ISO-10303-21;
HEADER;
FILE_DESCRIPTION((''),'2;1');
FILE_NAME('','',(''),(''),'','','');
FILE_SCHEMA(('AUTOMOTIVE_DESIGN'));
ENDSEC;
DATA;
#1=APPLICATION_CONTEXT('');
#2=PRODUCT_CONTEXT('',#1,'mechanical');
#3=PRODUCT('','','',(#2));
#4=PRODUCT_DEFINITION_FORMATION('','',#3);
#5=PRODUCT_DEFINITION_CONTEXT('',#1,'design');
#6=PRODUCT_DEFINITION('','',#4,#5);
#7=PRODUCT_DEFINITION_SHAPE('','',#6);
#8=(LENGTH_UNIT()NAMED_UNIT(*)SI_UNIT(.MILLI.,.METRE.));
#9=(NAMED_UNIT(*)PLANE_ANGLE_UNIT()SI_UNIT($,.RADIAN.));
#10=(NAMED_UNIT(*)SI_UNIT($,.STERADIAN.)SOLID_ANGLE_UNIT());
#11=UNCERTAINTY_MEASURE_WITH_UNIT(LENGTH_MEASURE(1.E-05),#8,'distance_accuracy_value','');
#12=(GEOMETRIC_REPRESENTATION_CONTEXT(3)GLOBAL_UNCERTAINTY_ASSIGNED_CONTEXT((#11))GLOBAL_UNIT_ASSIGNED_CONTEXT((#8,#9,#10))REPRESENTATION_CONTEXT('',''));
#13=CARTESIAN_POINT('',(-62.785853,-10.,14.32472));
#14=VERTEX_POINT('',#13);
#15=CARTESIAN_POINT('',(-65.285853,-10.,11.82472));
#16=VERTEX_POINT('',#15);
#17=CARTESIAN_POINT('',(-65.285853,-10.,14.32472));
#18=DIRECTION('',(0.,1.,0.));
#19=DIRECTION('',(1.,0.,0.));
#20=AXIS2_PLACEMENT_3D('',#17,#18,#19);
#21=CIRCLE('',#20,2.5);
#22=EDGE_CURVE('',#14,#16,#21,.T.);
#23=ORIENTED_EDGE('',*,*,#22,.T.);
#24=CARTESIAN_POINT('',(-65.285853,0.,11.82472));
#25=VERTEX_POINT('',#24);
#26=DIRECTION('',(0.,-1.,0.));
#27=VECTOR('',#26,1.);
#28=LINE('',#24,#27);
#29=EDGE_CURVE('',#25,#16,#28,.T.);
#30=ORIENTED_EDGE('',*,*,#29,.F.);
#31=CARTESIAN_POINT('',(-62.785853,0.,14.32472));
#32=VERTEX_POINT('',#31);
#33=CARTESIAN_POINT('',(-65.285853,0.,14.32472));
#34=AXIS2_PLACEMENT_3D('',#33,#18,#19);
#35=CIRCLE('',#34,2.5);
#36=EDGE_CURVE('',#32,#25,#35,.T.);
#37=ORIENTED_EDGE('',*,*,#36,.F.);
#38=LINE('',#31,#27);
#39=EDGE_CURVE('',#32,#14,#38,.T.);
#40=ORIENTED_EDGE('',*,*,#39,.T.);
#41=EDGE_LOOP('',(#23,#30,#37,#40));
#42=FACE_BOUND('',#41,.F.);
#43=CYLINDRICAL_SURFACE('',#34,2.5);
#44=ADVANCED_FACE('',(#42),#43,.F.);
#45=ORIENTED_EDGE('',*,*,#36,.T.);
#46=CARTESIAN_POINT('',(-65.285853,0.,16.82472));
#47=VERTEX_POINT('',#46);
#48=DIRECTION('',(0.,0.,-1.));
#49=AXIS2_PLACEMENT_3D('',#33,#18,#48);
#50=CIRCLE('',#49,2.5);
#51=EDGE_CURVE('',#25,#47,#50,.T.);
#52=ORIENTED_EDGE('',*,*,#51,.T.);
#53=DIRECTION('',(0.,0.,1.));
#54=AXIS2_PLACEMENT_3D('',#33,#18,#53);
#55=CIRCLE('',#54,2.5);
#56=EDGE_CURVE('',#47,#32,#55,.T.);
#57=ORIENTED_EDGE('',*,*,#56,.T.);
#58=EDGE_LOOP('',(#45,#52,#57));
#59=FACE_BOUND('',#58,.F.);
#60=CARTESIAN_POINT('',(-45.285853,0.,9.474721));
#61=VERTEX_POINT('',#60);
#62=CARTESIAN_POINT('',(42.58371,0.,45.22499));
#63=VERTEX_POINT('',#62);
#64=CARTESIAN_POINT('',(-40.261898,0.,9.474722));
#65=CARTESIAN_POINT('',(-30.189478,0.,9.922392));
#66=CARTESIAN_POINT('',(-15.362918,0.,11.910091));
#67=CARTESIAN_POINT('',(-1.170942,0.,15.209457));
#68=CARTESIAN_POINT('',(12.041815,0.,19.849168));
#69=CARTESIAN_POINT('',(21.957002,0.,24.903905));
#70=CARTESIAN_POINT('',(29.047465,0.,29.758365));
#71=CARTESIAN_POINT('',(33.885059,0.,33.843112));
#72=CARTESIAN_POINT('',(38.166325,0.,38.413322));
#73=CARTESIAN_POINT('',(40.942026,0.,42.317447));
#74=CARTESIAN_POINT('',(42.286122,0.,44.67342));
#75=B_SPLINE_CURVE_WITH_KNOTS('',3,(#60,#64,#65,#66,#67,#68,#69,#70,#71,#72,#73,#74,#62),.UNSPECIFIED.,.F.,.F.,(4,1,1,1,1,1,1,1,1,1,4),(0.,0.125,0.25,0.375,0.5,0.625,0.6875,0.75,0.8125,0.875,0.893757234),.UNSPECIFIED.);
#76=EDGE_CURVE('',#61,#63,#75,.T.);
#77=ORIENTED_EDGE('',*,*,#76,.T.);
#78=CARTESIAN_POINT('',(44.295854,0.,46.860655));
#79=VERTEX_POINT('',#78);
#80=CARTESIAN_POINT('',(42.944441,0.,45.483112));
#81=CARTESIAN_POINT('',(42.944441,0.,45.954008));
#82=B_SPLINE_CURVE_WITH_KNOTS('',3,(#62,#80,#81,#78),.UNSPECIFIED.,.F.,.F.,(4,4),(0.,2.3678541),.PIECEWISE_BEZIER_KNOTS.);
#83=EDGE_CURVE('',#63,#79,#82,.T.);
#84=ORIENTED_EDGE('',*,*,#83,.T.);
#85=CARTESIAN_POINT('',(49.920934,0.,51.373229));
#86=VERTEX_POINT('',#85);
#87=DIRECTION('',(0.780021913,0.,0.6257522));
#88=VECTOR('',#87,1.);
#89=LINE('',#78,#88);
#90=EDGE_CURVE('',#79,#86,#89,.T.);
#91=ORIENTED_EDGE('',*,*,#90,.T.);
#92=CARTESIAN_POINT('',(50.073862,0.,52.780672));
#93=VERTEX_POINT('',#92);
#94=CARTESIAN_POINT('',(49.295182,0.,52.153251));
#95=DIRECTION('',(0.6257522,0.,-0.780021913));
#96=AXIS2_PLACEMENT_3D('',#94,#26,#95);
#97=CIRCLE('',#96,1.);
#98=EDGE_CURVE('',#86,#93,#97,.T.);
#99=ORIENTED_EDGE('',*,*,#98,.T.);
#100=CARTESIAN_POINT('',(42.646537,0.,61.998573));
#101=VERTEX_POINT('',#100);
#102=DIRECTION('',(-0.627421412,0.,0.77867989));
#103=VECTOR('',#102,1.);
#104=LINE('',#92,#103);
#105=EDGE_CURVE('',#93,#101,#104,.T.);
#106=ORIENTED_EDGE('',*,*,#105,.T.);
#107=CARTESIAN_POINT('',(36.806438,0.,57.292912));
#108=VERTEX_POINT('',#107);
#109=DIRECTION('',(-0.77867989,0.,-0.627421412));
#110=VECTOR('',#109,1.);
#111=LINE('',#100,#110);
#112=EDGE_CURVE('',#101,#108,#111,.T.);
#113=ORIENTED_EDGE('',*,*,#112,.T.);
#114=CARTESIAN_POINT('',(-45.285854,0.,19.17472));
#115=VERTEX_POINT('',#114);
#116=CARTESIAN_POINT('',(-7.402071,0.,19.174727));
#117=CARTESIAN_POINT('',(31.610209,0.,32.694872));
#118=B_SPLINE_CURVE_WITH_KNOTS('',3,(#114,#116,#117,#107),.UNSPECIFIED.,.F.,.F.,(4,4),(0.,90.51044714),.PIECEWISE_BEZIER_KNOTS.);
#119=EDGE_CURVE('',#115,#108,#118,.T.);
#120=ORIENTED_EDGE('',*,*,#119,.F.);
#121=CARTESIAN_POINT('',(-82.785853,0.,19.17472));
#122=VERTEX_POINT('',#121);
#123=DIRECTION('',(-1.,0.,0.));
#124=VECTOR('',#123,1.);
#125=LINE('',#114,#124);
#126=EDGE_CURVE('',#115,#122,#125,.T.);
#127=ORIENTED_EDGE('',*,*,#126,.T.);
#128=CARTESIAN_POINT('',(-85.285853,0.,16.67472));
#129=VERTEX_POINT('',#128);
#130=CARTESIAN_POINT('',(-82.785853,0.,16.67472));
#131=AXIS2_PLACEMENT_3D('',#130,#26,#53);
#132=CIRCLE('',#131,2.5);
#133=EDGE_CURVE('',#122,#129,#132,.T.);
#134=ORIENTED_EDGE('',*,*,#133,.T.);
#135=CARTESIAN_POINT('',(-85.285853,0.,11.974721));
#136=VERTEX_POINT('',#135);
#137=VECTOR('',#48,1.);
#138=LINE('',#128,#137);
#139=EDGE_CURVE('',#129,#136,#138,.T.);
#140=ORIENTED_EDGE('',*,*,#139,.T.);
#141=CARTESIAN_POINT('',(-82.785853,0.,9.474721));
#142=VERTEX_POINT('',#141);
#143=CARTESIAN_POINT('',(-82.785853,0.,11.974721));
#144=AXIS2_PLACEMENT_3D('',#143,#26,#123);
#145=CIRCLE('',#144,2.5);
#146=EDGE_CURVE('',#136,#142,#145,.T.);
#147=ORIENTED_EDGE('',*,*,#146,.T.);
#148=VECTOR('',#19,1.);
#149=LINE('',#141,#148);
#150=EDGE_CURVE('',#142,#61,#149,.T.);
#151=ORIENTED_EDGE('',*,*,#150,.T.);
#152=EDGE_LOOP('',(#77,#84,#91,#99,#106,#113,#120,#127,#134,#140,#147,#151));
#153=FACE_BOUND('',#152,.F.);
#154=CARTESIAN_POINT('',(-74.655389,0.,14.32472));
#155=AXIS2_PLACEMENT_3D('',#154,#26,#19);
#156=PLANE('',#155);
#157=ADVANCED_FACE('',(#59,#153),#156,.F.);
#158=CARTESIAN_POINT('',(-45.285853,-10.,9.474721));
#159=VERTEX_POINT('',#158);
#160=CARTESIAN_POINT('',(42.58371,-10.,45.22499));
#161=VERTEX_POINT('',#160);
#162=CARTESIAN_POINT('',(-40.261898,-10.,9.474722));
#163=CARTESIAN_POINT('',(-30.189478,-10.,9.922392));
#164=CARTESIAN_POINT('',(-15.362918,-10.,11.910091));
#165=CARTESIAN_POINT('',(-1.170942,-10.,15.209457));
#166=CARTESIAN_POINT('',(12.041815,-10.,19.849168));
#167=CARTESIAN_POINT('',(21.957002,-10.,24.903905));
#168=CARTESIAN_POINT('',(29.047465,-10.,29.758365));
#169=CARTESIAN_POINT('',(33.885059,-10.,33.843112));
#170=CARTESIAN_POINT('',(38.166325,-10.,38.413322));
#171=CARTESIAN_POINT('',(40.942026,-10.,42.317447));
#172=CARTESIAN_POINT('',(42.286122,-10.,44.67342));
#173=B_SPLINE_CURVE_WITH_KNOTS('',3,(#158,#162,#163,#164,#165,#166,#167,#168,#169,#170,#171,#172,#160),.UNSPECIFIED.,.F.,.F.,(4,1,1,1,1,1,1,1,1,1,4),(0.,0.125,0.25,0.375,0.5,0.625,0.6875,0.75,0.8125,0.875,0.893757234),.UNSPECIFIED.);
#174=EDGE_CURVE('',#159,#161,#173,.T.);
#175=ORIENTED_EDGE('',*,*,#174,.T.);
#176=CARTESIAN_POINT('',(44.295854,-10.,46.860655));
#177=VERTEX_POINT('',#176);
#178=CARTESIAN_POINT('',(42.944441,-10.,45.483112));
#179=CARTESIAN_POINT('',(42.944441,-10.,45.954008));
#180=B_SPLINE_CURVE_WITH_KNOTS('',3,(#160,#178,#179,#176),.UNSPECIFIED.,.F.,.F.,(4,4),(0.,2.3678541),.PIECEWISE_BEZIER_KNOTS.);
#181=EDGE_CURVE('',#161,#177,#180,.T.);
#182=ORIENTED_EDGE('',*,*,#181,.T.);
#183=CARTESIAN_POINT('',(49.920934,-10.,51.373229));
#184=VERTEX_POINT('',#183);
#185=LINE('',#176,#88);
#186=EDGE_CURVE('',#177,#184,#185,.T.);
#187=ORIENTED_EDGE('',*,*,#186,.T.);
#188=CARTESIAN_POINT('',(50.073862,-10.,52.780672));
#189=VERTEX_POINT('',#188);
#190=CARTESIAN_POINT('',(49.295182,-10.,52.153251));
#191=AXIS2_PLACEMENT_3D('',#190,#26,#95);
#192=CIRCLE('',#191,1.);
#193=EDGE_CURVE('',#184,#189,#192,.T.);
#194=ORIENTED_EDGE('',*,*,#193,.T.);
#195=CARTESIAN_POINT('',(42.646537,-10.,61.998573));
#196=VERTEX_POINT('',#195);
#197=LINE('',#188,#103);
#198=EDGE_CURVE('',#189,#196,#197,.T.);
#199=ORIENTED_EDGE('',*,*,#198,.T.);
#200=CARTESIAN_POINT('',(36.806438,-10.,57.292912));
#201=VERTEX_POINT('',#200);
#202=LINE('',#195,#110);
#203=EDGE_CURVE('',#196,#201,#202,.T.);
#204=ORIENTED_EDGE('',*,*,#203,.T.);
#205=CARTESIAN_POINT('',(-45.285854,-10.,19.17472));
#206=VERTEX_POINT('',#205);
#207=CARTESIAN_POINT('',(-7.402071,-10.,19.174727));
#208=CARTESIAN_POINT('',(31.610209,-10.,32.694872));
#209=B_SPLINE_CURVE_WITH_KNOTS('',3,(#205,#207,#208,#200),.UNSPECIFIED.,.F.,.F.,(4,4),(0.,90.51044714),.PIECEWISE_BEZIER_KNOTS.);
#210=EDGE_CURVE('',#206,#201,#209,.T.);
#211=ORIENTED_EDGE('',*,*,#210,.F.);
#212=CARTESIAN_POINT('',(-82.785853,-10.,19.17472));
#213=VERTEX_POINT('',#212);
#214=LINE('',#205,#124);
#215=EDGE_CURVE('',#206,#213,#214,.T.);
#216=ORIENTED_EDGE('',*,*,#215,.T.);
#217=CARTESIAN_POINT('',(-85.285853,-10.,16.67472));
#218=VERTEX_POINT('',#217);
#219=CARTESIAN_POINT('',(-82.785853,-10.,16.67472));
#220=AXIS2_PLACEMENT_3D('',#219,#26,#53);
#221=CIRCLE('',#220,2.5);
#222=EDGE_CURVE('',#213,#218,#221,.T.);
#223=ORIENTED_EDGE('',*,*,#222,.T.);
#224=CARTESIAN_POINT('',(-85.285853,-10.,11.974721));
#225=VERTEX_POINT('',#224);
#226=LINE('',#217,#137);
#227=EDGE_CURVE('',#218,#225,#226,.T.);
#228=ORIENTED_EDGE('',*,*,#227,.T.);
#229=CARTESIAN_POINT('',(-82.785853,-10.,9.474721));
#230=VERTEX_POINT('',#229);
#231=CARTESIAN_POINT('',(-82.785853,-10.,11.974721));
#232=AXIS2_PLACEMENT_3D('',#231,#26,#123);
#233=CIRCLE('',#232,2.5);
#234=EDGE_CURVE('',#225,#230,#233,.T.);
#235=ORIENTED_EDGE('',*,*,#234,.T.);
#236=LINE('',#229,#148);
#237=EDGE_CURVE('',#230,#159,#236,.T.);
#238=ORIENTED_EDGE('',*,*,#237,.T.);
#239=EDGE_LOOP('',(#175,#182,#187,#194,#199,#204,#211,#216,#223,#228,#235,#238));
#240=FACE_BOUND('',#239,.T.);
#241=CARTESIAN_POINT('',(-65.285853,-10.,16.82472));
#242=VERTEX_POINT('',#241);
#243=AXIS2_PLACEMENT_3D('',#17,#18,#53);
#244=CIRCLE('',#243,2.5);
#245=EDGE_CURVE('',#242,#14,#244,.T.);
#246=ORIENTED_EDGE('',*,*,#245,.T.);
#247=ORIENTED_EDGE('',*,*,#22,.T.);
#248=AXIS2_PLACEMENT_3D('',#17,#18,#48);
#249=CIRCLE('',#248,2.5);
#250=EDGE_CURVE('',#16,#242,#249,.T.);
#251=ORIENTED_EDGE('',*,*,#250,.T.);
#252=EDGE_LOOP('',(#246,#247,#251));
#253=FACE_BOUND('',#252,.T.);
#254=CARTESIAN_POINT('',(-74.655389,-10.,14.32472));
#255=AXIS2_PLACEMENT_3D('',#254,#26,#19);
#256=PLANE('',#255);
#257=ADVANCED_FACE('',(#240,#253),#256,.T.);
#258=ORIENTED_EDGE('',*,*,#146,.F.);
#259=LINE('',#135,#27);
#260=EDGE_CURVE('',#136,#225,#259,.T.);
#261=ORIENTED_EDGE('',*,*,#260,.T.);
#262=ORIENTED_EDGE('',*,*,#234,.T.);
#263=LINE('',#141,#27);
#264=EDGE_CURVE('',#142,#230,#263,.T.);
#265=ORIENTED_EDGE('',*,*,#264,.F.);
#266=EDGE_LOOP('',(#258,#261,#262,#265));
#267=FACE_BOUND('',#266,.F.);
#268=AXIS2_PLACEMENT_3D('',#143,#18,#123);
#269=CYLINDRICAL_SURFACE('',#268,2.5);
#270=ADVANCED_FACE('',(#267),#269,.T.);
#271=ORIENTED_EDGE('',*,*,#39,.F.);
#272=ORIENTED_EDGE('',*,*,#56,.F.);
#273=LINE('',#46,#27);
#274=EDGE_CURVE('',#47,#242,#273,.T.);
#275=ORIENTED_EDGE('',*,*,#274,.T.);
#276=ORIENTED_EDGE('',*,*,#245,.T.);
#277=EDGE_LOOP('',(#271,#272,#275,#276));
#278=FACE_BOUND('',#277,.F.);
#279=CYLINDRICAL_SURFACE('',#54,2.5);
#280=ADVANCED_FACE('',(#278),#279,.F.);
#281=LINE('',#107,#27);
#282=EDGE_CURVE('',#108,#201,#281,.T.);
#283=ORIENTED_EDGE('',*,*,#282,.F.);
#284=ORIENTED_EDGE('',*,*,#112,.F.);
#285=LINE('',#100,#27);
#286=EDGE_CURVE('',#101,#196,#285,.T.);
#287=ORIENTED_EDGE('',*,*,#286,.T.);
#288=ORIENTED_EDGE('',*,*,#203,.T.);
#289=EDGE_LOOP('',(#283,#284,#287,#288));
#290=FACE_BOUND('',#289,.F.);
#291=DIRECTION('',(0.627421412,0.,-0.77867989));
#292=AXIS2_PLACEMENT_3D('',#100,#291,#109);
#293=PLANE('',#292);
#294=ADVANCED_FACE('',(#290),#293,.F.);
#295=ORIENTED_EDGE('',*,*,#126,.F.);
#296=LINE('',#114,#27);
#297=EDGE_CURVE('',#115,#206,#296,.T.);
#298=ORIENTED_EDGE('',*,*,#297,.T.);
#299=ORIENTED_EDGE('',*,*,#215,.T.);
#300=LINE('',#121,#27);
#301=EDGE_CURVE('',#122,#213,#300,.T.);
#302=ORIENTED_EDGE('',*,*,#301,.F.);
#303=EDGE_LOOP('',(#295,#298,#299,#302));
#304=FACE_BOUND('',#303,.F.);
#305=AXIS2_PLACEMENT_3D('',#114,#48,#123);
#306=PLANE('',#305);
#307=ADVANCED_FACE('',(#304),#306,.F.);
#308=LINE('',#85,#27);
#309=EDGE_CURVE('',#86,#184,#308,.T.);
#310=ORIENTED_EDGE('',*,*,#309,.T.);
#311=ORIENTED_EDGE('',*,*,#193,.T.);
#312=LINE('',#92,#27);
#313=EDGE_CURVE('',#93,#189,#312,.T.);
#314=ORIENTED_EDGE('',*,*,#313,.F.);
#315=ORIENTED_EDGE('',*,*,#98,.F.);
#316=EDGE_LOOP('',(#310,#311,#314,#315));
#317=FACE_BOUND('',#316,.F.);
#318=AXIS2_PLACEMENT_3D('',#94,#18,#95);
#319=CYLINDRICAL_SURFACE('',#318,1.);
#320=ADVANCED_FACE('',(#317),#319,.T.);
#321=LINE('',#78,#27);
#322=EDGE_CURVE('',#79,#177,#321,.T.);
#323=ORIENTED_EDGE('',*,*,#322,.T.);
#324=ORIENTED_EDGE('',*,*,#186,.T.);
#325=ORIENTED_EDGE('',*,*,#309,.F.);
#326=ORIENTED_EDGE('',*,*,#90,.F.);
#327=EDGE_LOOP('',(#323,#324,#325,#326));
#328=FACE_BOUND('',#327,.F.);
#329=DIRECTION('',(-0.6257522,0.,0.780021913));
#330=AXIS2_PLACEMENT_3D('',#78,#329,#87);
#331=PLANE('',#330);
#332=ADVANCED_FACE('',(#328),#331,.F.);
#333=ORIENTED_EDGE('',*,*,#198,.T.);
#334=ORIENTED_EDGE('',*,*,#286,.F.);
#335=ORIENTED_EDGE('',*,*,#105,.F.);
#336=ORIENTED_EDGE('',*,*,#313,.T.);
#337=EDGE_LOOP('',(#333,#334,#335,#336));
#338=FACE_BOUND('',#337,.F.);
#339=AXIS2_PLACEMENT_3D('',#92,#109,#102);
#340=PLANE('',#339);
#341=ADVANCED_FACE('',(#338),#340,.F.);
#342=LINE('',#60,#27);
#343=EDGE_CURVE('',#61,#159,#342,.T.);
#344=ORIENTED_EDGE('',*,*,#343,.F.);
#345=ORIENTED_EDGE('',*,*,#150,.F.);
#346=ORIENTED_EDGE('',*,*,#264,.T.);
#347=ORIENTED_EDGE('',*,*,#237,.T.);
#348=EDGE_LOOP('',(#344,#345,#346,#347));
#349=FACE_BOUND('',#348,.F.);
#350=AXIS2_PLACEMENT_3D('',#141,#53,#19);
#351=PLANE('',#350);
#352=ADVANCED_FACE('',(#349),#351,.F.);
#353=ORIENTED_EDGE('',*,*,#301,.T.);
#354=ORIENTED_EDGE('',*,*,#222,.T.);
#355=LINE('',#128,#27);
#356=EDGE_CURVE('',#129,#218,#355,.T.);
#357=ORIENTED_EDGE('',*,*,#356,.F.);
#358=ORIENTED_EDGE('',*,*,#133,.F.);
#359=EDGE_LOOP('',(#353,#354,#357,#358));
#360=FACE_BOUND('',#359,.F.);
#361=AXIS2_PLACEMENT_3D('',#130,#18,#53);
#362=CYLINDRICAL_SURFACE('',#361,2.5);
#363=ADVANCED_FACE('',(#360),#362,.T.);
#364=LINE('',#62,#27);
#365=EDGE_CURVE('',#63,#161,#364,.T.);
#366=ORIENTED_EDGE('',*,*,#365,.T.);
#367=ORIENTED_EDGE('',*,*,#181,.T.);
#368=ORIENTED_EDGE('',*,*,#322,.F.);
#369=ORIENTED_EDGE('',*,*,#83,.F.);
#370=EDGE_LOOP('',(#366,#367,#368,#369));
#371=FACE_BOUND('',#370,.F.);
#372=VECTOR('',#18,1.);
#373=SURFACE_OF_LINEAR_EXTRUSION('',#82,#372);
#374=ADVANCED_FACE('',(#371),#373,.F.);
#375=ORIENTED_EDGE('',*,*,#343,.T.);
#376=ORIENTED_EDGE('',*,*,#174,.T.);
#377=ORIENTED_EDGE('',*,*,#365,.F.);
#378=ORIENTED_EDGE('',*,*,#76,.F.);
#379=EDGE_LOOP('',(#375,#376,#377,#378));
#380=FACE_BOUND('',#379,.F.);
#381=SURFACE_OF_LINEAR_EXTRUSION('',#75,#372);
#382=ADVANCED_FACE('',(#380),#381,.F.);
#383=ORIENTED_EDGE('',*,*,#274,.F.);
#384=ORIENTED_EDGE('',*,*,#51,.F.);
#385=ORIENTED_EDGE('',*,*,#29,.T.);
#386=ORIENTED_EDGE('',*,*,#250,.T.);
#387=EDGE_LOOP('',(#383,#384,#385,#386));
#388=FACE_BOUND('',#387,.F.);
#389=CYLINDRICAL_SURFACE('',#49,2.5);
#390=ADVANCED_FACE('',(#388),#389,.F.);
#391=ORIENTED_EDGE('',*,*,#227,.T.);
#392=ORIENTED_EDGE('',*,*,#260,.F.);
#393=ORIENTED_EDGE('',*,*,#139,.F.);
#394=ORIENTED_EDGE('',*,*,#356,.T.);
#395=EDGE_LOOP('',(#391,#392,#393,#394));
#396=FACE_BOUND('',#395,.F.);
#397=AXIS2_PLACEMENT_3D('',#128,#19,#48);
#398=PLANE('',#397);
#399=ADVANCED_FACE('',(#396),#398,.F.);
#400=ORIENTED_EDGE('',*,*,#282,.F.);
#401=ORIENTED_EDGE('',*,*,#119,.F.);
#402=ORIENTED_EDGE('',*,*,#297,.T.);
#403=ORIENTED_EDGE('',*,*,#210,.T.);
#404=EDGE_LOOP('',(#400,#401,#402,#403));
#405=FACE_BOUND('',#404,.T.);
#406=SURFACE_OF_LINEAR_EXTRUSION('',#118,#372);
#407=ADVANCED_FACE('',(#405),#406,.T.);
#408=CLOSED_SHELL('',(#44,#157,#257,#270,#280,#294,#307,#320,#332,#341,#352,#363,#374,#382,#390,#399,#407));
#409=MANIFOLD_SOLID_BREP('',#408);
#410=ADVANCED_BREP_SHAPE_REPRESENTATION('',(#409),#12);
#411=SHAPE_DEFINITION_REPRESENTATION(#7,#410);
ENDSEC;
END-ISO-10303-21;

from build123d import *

# Parameters (mm, degrees)
F1_DEPTH = 10


# Not quite as in the source:
# - ends of sketch curves that miss each other by under 0.0002 mm in the source are joined
# - the dataset's text gives a spline's control points without its knots; the knots are read off the source's solid


with BuildPart() as f1:
    # F0 (on Front) → F1 (new body)
    with BuildSketch(Plane.XZ):
        with BuildLine():
            Line((-65.2858525045, 19.1747198819), (-82.7858525045, 19.1747198819))
            ThreePointArc((-82.7858525045, 19.1747198819), (-84.5536194575, 18.4424868349), (-85.2858525045, 16.6747198819))
            Line((-85.2858525045, 16.6747198819), (-85.2858525045, 11.9747207331))
            ThreePointArc((-85.2858525045, 11.9747207331), (-84.5536194575, 10.2069537801), (-82.7858525045, 9.4747207331))
            Line((-82.7858525045, 9.4747207331), (-65.2858525045, 9.4747207331))
            Line((-65.2858525045, 9.4747207331), (-65.2858525045, 11.8247203075))
            ThreePointArc((-65.2858525045, 11.8247203075), (-67.7858525045, 14.3247203075), (-65.2858525045, 16.8247203075))
            Line((-65.2858525045, 16.8247203075), (-65.2858525045, 19.1747198819))
        make_face()
        with BuildLine():
            Line((-45.2858542078, 19.1747198819), (-65.2858525045, 19.1747198819))
            Line((-65.2858525045, 19.1747198819), (-65.2858525045, 16.8247203075))
            ThreePointArc((-65.2858525045, 16.8247203075), (-63.5180855515, 16.0924872605), (-62.7858525045, 14.3247203075))
            ThreePointArc((-62.7858525045, 14.3247203075), (-63.5180855515, 12.5569533545), (-65.2858525045, 11.8247203075))
            Line((-65.2858525045, 11.8247203075), (-65.2858525045, 9.4747207331))
            Line((-65.2858525045, 9.4747207331), (-45.2858525045, 9.4747207331))
            Line((-45.2858525045, 9.4747207331), (-45.2858542078, 19.1747198819))
        make_face()
        with BuildLine():
            add(Edge.make_bspline(
                [(-45.2858542078, 19.1747198819), (-7.4020708747, 19.1747265342), (31.6102094948, 32.6948724687), (36.8064381182, 57.2929121554)],
                knots=[0, 0, 0, 0, 90.5104471403, 90.5104471403, 90.5104471403, 90.5104471403], degree=3))
            Line((-45.2858542078, 19.1747198819), (-45.2858525045, 9.4747207331))
            add(Edge.make_bspline(
                [(-45.2858525045, 9.4747207331), (-40.2618978901, 9.4747216153), (-30.1894784684, 9.9223917761), (-15.362918013, 11.9100905112), (-1.1709415961, 15.2094571968), (12.0418148644, 19.8491680066), (21.9570020274, 24.9039048155), (29.047465051, 29.7583646646), (33.8850587667, 33.8431124408), (38.1663250739, 38.413322434), (40.9420261226, 42.3174471625), (42.2861221075, 44.6734195955), (42.5837097689, 45.2249895308)],
                knots=[0, 0, 0, 0, 0.125, 0.25, 0.375, 0.5, 0.625, 0.6875, 0.75, 0.8125, 0.875, 0.8937572345, 0.8937572345, 0.8937572345, 0.8937572345], degree=3))
            add(Edge.make_bspline(
                [(42.5837097689, 45.2249895308), (42.9712246909, 45.9432369861), (43.3372375793, 46.6745796576), (43.6802036603, 47.4185139687)],
                knots=[0.8937572345, 0.8937572345, 0.8937572345, 0.8937572345, 0.9181826701, 0.9181826701, 0.9181826701, 0.9181826701], degree=3))
            Line((43.6802036603, 47.4185139687), (44.295853648, 46.8606554446))
            Line((44.295853648, 46.8606554446), (49.9209338751, 51.373229087))
            ThreePointArc((49.9209338751, 51.373229087), (50.2893303324, 52.0452304101), (50.0738615656, 52.7806724123))
            Line((50.0738615656, 52.7806724123), (42.6465372943, 61.9985727481))
            Line((42.6465372943, 61.9985727481), (36.8064381182, 57.2929121554))
        make_face()
        with BuildLine():
            add(Edge.make_bspline(
                [(42.5837097689, 45.2249895308), (42.9712246909, 45.9432369861), (43.3372375793, 46.6745796576), (43.6802036603, 47.4185139687)],
                knots=[0.8937572345, 0.8937572345, 0.8937572345, 0.8937572345, 0.9181826701, 0.9181826701, 0.9181826701, 0.9181826701], degree=3))
            add(Edge.make_bspline(
                [(42.5837097689, 45.2249895308), (42.9444412623, 45.4831122336), (42.9444412623, 45.9540075538), (44.295853648, 46.8606554446)],
                knots=[0, 0, 0, 0, 2.3678540998, 2.3678540998, 2.3678540998, 2.3678540998], degree=3))
            Line((44.295853648, 46.8606554446), (43.6802036603, 47.4185139687))
        make_face()
    extrude(amount=F1_DEPTH)


solid = f1.part
